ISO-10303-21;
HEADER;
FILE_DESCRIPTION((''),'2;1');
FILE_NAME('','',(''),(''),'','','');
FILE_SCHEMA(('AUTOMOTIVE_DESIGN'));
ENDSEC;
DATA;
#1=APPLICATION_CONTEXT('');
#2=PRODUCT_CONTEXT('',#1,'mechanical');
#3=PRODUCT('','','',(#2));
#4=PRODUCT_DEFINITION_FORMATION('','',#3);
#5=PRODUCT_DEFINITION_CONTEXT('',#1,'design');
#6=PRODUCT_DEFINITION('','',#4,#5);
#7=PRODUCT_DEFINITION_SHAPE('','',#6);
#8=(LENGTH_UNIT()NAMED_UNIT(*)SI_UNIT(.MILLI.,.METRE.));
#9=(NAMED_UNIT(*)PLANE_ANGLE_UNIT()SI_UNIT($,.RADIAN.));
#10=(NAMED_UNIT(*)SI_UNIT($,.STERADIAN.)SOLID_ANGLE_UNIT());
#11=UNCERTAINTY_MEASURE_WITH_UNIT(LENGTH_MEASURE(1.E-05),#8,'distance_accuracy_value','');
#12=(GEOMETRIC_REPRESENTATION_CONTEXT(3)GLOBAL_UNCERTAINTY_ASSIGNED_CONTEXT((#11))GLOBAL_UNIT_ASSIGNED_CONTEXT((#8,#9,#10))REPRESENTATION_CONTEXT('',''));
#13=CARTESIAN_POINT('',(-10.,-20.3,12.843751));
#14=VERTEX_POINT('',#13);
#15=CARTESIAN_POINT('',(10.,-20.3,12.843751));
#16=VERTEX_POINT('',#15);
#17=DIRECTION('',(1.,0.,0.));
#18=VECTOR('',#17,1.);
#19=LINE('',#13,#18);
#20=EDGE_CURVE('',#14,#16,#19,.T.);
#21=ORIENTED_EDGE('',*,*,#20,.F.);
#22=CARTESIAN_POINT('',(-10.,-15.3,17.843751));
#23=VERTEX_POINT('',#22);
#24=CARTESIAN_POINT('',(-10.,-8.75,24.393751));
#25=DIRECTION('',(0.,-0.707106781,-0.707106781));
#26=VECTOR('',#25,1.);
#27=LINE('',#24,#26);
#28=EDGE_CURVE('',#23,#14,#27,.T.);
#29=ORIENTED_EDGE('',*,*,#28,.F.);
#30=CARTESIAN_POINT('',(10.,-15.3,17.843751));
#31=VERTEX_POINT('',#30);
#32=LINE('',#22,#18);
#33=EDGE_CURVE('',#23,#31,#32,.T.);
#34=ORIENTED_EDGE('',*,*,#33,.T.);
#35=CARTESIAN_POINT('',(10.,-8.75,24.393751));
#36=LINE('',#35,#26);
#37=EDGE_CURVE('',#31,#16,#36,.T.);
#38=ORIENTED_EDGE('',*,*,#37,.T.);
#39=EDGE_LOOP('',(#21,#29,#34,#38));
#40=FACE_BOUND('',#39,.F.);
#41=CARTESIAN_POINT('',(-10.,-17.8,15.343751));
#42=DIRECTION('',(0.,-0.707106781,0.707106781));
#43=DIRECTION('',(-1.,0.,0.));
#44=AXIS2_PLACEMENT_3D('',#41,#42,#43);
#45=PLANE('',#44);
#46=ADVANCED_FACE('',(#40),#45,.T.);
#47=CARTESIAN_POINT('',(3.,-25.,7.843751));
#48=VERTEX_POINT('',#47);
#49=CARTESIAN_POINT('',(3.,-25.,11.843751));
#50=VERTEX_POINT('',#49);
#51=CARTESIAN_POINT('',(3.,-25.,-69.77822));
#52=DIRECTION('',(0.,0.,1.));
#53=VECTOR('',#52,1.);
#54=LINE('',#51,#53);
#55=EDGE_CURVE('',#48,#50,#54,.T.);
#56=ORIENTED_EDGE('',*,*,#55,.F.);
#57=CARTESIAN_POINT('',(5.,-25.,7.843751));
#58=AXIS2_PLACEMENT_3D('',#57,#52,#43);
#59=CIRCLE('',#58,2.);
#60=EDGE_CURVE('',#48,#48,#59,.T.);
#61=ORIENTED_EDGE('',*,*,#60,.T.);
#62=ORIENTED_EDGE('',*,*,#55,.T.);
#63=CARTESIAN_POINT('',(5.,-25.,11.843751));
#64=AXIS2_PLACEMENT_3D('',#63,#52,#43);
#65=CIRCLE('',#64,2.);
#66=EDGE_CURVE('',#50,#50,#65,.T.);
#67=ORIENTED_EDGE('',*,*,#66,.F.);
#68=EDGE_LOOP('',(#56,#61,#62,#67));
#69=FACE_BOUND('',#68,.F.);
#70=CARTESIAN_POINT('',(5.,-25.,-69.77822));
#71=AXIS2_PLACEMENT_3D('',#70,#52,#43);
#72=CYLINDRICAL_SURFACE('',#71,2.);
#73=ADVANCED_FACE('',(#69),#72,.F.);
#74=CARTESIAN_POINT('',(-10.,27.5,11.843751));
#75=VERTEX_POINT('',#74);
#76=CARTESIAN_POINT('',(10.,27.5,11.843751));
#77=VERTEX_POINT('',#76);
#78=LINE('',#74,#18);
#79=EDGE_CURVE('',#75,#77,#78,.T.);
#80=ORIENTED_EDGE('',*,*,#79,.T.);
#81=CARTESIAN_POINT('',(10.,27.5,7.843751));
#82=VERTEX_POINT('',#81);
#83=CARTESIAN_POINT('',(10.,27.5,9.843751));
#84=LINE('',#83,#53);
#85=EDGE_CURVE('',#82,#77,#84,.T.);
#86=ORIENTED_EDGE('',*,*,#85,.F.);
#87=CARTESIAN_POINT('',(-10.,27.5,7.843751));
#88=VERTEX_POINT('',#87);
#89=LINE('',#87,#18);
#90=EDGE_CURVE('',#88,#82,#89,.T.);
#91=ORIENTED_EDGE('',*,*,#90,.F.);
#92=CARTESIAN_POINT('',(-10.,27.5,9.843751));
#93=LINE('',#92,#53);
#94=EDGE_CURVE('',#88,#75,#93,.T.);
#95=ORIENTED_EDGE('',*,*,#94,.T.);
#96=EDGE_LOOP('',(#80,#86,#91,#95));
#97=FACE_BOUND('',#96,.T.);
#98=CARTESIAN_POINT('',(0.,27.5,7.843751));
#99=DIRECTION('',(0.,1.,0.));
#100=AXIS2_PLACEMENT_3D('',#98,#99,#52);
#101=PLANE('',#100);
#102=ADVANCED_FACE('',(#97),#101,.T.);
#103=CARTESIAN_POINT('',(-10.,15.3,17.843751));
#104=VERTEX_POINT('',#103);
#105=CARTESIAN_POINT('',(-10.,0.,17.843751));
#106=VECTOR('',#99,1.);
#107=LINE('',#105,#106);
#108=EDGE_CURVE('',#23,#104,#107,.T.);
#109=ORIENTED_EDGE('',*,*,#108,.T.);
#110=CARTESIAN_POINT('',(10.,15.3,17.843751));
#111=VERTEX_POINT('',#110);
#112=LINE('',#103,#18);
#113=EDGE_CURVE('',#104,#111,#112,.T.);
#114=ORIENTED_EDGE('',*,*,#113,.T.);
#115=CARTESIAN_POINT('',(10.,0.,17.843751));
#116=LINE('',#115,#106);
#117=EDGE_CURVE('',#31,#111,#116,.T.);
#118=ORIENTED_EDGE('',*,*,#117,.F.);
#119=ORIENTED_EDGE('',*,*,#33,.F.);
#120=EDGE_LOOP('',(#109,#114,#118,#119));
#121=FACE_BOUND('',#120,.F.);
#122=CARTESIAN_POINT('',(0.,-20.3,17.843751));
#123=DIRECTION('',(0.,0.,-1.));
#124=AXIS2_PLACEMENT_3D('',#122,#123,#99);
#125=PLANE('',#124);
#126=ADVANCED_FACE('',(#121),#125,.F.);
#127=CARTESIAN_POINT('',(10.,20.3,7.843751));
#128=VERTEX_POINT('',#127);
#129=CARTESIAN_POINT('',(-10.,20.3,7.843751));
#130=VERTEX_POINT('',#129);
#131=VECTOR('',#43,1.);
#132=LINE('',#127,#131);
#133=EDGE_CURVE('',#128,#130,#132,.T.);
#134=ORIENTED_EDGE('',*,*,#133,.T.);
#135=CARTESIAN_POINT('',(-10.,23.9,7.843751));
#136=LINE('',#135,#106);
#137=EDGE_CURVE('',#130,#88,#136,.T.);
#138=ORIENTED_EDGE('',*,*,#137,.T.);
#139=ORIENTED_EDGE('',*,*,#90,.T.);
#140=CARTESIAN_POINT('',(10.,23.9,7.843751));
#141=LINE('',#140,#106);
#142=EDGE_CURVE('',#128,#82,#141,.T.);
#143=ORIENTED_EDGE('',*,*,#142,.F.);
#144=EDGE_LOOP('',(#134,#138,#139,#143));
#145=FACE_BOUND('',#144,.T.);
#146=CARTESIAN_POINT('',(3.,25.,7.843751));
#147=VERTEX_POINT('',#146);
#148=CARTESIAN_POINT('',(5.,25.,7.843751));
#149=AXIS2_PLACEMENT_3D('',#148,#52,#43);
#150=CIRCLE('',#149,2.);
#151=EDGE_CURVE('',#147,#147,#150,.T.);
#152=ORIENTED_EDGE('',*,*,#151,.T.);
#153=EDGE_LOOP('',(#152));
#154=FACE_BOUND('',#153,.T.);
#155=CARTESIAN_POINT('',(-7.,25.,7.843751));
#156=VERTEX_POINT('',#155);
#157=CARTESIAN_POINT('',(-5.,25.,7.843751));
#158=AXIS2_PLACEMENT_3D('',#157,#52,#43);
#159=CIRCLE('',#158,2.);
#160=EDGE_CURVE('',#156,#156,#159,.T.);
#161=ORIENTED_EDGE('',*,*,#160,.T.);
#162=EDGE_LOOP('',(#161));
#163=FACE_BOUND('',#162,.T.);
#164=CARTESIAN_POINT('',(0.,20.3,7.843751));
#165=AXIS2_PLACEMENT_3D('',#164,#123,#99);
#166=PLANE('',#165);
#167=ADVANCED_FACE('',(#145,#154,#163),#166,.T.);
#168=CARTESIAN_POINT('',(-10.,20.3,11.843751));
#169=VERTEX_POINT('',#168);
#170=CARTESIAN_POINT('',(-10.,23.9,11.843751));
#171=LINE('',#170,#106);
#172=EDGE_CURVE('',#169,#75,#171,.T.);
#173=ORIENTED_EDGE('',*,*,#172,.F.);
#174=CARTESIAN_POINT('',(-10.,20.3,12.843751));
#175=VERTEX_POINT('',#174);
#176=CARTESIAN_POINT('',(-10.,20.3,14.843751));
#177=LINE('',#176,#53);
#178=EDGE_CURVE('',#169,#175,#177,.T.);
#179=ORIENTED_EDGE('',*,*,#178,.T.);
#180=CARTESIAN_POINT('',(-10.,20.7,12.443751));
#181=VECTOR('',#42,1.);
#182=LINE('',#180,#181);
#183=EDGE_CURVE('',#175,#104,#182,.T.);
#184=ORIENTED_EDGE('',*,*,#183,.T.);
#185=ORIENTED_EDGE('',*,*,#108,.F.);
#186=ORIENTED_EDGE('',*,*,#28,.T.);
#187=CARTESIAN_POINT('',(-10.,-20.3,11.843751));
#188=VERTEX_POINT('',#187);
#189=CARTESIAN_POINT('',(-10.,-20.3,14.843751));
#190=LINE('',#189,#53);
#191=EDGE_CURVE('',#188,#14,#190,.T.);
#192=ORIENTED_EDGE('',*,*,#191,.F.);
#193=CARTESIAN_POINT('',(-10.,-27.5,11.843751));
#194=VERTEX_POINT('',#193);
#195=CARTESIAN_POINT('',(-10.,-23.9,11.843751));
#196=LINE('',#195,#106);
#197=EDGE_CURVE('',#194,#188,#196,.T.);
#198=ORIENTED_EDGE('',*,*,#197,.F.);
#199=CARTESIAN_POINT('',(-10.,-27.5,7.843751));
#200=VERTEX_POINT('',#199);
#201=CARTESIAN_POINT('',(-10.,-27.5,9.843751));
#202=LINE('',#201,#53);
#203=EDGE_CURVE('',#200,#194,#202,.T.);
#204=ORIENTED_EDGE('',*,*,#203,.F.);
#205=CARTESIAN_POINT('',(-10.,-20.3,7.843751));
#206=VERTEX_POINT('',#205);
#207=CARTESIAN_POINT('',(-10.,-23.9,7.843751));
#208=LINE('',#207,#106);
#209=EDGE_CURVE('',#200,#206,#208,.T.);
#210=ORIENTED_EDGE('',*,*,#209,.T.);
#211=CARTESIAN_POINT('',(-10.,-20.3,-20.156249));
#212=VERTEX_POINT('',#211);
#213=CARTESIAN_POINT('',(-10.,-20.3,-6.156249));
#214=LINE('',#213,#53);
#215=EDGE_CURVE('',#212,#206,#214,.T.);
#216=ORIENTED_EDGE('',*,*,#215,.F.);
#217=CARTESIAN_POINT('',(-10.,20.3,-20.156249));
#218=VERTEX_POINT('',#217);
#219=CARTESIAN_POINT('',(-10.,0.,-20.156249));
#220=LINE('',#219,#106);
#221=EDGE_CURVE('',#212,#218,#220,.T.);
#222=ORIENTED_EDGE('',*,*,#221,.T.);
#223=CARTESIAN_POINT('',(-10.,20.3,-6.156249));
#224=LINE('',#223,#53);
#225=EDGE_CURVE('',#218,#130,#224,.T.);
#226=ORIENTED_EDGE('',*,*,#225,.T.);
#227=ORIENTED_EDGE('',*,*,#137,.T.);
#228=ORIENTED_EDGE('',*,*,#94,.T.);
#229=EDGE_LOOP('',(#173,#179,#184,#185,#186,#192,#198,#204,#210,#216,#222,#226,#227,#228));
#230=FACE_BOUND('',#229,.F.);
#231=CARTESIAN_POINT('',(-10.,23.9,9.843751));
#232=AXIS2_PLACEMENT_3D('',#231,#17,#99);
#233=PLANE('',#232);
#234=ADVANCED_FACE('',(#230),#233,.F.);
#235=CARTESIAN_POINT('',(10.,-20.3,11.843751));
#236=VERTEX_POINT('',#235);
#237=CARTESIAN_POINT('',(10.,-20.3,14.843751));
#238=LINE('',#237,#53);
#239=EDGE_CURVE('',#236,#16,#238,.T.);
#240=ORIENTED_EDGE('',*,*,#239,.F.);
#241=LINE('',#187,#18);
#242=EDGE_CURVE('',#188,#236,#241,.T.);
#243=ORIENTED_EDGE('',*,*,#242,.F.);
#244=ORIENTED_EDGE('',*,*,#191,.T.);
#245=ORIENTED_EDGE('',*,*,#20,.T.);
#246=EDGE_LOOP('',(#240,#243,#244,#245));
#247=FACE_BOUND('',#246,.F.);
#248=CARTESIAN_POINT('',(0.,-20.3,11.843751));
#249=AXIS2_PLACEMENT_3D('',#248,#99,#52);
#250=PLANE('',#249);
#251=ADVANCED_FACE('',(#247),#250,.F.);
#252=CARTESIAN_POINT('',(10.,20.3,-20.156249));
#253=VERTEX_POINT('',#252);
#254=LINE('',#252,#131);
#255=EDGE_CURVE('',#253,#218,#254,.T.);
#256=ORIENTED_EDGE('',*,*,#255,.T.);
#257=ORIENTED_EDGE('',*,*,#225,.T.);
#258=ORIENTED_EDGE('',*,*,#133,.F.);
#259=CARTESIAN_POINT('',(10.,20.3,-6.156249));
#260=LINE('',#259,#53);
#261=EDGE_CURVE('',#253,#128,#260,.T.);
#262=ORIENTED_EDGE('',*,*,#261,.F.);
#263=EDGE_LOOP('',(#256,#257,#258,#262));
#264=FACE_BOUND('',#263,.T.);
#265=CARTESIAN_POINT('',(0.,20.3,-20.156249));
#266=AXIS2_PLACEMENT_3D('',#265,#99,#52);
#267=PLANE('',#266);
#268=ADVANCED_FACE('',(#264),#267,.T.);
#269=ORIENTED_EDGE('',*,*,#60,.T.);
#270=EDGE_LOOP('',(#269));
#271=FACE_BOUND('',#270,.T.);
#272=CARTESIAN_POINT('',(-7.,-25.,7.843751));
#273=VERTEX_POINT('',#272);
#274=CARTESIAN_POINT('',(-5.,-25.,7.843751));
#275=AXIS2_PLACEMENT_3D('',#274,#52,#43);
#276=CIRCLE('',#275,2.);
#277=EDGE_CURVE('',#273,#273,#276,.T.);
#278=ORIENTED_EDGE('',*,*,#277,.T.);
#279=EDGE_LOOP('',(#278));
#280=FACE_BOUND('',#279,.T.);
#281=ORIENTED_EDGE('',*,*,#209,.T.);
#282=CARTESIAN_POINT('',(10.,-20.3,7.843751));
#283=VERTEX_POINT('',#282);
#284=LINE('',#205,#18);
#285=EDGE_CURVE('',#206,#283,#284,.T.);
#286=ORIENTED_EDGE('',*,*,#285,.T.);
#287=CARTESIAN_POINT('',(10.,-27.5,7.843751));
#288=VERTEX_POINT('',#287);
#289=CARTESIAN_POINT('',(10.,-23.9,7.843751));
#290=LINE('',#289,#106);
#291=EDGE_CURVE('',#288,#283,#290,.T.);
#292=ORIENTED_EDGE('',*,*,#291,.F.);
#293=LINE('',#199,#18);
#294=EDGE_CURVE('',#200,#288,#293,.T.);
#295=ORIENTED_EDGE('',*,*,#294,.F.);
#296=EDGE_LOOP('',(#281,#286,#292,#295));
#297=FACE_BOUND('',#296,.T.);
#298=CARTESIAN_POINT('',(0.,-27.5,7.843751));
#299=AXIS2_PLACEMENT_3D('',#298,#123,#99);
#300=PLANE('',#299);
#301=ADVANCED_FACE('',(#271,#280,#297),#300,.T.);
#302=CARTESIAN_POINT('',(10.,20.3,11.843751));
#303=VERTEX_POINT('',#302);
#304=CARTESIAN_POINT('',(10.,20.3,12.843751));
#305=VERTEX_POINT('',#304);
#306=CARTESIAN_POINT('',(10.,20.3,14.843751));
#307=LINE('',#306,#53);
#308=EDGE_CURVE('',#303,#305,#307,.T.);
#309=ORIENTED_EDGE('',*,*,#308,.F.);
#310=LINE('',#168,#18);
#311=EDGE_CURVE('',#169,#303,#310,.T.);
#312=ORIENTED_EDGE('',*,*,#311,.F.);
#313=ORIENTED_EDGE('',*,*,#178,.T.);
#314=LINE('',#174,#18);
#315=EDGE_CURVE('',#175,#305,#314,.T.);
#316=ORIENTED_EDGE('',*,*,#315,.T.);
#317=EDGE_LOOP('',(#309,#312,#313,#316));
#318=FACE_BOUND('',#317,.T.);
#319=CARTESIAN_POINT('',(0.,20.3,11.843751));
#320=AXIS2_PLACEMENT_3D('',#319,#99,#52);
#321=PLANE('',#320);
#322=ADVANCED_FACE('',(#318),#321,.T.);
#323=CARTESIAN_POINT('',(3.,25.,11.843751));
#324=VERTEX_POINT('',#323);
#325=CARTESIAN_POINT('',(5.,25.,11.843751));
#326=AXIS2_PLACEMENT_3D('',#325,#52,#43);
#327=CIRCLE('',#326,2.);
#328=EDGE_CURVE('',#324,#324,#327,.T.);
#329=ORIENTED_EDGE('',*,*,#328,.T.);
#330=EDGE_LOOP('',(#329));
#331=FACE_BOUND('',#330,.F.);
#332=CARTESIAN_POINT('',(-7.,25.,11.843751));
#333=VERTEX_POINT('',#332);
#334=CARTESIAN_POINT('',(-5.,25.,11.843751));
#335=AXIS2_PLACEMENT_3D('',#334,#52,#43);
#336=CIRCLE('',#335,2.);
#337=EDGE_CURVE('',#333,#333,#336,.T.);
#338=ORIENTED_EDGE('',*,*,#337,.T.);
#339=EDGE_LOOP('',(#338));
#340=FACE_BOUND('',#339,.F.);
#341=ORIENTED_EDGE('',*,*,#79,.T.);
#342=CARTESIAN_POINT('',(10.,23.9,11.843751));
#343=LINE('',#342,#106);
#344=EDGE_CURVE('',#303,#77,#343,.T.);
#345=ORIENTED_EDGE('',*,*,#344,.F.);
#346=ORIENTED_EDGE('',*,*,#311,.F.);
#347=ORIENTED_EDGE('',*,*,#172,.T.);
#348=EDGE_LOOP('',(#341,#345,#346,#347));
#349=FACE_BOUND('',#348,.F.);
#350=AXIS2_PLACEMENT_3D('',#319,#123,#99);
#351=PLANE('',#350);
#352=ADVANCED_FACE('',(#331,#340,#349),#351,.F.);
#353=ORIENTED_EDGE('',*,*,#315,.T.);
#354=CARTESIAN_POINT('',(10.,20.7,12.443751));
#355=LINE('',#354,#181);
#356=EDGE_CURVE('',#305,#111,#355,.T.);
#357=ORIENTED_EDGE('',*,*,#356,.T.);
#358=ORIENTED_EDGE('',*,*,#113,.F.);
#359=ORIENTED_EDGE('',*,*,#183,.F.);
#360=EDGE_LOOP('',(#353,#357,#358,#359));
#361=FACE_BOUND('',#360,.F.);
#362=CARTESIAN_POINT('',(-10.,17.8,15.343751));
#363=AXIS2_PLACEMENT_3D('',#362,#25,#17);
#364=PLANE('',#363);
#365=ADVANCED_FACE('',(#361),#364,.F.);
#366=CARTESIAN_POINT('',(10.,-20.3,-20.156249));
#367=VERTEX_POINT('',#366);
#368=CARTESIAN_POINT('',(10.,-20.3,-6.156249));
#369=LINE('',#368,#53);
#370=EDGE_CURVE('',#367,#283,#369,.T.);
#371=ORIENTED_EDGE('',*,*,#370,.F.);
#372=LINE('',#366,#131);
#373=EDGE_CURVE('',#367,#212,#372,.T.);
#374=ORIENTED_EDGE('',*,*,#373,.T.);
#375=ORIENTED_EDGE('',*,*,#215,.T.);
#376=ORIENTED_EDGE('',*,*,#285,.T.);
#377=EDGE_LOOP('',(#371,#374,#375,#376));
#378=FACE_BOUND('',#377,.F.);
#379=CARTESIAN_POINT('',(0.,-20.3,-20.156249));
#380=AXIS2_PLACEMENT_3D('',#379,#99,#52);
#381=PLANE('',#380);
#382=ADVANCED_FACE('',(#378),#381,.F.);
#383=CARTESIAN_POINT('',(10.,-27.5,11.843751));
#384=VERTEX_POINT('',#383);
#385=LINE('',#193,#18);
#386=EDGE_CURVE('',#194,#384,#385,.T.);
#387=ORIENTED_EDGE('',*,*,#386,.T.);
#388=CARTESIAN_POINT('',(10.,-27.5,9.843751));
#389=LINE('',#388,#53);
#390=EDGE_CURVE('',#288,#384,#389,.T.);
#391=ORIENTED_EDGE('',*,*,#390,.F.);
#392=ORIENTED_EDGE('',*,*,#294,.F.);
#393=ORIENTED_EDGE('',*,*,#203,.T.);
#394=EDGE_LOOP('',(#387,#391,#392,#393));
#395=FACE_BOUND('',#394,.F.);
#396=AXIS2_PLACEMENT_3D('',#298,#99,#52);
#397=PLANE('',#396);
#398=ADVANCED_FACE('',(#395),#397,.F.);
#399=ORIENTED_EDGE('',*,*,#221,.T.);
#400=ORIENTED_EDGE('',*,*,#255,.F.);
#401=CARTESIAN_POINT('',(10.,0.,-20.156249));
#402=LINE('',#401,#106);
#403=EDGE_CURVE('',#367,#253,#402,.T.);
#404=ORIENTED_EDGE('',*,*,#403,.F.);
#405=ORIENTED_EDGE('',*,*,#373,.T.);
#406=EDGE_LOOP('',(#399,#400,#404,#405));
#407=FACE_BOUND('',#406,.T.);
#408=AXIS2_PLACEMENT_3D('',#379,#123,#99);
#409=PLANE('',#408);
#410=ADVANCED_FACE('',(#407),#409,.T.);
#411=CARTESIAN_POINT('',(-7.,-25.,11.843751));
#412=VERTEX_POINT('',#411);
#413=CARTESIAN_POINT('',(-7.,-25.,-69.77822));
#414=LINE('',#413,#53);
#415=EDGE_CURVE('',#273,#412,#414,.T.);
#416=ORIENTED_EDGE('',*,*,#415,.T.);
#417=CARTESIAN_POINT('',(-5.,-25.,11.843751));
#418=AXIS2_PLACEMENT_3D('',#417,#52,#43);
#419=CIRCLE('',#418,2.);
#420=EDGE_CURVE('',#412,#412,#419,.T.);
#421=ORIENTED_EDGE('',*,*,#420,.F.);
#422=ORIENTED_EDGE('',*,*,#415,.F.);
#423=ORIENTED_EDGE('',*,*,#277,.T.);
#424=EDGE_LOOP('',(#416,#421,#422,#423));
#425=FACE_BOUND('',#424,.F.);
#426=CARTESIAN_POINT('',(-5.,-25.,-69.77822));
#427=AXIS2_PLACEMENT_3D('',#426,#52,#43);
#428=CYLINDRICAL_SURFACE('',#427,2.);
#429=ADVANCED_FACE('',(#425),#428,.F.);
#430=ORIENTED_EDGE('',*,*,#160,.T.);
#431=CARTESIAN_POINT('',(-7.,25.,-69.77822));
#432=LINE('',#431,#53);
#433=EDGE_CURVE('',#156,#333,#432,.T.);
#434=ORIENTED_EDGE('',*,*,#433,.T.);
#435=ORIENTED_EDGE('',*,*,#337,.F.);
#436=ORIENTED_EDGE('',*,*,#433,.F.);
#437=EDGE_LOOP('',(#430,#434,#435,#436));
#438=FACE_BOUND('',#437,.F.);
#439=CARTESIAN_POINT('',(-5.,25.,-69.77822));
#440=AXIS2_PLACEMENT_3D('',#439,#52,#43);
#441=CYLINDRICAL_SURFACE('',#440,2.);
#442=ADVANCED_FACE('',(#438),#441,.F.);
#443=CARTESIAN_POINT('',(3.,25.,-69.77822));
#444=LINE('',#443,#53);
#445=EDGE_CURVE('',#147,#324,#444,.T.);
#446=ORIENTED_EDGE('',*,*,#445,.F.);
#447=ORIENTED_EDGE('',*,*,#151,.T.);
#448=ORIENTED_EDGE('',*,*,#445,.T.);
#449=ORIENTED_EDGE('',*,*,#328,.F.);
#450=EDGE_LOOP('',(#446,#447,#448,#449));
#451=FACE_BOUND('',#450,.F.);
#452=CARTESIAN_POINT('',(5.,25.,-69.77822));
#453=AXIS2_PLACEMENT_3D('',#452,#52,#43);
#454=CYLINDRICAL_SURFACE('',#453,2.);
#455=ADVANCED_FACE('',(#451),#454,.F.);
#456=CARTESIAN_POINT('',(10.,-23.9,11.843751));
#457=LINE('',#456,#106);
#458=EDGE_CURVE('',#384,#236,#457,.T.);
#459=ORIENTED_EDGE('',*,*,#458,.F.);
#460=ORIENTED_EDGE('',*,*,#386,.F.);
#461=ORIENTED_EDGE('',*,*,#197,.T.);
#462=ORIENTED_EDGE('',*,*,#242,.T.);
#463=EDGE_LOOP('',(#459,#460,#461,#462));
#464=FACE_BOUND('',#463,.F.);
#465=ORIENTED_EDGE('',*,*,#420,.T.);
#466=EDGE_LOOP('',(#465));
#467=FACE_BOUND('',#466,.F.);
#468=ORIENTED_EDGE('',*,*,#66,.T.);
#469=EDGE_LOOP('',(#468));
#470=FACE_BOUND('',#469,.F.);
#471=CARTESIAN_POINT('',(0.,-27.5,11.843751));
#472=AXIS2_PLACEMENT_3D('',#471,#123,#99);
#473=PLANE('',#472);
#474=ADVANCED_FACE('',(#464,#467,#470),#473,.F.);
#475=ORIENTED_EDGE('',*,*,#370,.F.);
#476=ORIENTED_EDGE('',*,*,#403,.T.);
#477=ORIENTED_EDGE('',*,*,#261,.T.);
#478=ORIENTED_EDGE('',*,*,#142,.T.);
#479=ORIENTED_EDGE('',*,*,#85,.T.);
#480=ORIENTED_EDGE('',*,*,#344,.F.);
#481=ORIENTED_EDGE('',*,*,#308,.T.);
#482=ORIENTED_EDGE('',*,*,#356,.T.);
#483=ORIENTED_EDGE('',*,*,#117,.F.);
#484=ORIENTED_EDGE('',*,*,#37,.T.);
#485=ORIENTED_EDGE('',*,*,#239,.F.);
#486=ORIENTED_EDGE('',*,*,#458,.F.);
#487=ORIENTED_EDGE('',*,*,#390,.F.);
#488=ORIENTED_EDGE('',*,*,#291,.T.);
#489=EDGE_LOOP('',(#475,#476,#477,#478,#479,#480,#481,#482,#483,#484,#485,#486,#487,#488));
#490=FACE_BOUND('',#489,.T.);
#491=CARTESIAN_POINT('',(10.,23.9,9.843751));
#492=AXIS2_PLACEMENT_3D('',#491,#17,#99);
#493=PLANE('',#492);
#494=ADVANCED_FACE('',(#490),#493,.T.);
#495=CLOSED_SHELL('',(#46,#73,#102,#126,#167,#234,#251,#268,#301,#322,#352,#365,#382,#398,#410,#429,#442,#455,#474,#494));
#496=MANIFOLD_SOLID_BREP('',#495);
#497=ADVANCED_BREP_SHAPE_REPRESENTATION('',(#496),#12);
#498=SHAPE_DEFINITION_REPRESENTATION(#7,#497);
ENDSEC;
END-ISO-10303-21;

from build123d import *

# Parameters (mm, degrees)
F0_W     = 7.2
F0_H     = 4
F0_W_2   = 40.6
F0_H_2   = 6
F0_H_3   = 28
F1_DEPTH = 10
F3_D     = 4
F4_SIZE  = 5


# Not quite as in the source:
# - the program builds the solid bodies; features that only make, move or delete a surface that nothing else refers to are left out


with BuildPart() as f1:
    # F0 (on Right) → F1 (new body, symmetric)
    with BuildSketch(Plane.YZ):
        with Locations((23.9, 9.8437508568)):
            Rectangle(F0_W, F0_H)
        with Locations((0, 14.8437508568)):
            Rectangle(F0_W_2, F0_H_2)
        with Locations((0, -6.1562491432)):
            Rectangle(F0_W_2, F0_H_3)
        with Locations((-23.9, 9.8437508568)):
            Rectangle(F0_W, F0_H)
        with Locations((0, 9.8437508568)):
            Rectangle(F0_W_2, F0_H)
    extrude(amount=F1_DEPTH, both=True)

    # F3 (through all)
    with Locations(Plane(origin=(0, 0, 0), x_dir=(1, 0, 0), z_dir=(0, 0, -1))):
        with Locations((-5, -25), (5, -25), (5, 25), (-5, 25)):
            Hole(F3_D / 2)

    # F4
    f4_edges = [f1.edges().sort_by_distance(p)[0] for p in [
        (0, -20.3, 17.843751),
        (0, 20.3, 17.843751),
    ]]
    chamfer(f4_edges, length=F4_SIZE)


solid = f1.part
